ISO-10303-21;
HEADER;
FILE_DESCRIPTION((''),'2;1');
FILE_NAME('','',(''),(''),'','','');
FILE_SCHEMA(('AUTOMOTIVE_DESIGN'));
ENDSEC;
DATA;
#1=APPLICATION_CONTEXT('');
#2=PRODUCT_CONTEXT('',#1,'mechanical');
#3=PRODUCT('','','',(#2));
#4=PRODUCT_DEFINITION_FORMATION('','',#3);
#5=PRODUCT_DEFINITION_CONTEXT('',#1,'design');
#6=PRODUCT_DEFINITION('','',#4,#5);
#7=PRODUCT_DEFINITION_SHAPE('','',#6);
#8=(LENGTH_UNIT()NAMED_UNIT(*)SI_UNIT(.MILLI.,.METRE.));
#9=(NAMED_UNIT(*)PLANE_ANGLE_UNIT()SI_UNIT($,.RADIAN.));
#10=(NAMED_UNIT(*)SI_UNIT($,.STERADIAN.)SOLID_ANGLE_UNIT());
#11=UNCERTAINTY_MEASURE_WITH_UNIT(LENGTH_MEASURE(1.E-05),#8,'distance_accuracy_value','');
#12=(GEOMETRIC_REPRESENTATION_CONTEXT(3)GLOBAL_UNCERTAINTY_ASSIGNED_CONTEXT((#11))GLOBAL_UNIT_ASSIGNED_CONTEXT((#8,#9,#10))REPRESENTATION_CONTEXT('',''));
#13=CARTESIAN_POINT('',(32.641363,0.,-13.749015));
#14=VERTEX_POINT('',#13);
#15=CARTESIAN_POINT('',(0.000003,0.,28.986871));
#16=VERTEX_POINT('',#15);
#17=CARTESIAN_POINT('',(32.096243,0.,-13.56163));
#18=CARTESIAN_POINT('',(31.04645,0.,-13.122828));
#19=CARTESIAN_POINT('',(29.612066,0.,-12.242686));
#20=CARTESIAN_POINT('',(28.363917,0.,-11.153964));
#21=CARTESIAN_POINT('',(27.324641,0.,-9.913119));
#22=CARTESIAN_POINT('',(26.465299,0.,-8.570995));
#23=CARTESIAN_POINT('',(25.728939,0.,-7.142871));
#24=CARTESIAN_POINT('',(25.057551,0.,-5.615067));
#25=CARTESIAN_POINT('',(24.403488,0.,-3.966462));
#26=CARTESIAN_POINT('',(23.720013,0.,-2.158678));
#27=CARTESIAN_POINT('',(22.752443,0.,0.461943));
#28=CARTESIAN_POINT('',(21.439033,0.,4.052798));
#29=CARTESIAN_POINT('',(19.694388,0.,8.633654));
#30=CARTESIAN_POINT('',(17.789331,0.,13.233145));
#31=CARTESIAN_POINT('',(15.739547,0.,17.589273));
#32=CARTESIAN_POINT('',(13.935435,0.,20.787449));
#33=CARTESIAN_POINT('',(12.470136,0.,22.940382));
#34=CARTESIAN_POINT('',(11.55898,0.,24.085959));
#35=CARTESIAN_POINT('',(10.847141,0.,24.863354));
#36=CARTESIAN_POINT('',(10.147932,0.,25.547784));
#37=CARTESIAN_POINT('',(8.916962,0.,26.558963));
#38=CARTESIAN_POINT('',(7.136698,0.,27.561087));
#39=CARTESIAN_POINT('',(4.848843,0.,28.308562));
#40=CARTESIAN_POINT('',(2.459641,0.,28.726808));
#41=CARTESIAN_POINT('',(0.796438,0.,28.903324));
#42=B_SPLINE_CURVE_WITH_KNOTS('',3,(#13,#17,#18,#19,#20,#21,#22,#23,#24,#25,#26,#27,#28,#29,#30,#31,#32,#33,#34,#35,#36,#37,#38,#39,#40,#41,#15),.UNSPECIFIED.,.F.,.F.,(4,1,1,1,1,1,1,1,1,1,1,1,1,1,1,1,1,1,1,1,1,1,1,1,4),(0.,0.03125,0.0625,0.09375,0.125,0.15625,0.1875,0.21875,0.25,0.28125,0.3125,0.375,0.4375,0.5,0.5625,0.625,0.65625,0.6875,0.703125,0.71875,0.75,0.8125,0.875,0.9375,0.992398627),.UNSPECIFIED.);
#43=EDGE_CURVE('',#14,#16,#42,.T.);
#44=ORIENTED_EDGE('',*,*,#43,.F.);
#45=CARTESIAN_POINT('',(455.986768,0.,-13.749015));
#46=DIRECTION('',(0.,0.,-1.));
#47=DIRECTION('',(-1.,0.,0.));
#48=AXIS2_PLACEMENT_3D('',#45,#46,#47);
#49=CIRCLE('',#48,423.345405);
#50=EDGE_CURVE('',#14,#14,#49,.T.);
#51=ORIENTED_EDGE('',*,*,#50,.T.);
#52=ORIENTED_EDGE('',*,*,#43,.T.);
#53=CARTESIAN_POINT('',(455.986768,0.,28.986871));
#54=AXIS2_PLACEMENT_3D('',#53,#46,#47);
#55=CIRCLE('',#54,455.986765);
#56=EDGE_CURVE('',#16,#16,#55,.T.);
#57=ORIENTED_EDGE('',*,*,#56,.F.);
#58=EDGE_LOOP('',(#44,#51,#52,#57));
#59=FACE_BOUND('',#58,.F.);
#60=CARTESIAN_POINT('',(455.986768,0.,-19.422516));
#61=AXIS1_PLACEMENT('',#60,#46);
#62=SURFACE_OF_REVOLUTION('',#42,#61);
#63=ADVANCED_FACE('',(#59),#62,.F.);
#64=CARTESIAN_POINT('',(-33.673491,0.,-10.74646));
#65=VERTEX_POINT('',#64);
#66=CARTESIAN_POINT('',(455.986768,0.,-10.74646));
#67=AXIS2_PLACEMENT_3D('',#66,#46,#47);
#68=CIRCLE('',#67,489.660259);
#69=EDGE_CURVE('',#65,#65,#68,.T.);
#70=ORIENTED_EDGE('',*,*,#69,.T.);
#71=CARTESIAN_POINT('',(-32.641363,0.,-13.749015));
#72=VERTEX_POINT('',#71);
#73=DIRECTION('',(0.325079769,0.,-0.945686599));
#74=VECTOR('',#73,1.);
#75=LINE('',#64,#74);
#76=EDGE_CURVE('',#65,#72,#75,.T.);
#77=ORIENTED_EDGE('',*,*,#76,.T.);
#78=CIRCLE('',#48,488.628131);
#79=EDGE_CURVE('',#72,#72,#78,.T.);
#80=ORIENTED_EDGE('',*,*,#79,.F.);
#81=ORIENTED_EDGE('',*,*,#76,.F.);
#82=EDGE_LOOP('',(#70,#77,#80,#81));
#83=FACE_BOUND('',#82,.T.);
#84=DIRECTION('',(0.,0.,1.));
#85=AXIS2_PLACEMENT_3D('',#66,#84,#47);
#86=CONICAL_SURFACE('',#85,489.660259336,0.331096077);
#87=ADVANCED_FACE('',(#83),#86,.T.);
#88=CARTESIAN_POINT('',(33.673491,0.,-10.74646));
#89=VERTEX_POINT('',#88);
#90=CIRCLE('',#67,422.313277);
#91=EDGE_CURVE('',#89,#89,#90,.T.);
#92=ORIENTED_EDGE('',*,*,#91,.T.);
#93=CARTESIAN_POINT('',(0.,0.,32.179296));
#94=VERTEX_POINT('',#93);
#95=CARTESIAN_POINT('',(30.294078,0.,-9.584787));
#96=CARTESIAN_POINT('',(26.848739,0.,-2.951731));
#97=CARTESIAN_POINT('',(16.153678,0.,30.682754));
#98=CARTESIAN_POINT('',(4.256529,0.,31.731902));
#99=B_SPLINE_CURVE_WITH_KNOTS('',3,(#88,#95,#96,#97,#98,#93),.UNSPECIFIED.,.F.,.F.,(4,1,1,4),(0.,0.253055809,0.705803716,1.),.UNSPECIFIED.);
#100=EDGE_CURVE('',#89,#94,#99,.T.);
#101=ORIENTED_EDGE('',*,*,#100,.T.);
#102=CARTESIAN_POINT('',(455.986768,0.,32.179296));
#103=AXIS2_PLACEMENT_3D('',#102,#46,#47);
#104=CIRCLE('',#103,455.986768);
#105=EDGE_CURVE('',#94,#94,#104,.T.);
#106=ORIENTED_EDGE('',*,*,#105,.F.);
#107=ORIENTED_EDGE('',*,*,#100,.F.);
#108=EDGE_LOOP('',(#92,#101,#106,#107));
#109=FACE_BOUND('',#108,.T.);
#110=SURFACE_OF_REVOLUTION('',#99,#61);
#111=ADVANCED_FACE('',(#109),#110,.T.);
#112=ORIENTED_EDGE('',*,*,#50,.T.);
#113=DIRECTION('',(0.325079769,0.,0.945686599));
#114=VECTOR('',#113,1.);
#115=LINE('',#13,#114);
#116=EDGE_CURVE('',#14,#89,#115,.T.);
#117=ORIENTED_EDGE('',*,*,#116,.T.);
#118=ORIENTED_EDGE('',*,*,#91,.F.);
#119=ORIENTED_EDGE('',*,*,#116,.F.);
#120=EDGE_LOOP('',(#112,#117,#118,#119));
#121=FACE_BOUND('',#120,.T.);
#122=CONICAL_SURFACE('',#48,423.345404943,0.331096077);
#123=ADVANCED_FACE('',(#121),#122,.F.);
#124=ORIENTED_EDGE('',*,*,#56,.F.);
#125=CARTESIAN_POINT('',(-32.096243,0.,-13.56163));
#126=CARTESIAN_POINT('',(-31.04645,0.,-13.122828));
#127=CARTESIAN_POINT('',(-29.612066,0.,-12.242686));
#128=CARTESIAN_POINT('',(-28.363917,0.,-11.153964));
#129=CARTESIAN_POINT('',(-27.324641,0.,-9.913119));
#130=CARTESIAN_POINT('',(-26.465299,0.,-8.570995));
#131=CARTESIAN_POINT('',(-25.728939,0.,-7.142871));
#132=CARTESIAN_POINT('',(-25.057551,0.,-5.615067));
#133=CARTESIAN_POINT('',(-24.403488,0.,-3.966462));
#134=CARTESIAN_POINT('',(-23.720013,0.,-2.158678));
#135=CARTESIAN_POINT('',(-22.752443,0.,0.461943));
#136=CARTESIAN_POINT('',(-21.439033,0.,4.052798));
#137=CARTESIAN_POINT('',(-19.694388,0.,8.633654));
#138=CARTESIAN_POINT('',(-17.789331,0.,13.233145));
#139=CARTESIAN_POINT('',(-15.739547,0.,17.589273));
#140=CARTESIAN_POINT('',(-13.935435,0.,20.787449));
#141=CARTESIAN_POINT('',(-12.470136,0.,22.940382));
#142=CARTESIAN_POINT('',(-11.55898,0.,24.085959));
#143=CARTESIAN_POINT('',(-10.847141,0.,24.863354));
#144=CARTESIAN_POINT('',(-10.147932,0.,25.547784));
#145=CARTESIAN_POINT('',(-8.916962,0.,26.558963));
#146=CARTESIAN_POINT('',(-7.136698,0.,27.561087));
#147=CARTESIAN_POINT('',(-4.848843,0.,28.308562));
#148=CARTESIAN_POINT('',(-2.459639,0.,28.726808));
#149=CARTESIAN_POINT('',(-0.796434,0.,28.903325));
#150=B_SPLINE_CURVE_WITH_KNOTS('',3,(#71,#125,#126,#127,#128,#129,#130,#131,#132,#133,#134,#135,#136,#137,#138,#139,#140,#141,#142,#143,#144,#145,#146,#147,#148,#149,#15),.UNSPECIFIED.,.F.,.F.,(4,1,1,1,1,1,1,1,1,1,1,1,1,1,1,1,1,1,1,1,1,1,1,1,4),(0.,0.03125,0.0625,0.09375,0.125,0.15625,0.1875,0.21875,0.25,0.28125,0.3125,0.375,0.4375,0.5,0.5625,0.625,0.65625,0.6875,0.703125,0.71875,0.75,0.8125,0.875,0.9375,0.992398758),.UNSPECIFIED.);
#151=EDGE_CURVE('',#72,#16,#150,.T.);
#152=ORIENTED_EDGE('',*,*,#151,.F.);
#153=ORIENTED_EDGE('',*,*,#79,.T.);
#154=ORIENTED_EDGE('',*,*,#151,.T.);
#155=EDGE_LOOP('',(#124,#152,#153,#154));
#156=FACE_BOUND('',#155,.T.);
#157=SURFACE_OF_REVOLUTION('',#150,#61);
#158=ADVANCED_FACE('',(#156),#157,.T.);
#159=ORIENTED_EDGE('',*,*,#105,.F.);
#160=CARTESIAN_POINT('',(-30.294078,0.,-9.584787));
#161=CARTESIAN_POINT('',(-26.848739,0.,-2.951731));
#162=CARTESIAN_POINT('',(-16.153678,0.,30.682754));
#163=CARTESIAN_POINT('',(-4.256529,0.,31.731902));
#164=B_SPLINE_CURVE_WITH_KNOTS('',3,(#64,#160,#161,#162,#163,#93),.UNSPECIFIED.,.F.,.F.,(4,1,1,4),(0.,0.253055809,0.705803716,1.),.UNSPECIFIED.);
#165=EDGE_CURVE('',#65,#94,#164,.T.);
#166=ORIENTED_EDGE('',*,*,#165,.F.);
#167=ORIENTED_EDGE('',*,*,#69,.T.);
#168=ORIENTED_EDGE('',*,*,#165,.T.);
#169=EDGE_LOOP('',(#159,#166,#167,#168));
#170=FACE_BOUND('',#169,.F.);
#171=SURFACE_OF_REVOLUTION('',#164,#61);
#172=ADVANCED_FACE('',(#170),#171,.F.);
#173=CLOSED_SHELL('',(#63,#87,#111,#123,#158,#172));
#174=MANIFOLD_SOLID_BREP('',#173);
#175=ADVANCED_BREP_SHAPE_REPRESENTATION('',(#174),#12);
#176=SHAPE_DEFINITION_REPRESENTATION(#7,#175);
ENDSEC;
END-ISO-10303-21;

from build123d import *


# Not quite as in the source:
# - ends of sketch curves that miss each other by under 0.0002 mm in the source are joined
# - the dataset's text gives a spline's control points without its knots; the knots are read off the source's solid


with BuildPart() as f1:
    # F0 (on Front) → F1 (revolve)
    with BuildSketch(Plane.XZ):
        with BuildLine():
            add(Edge.make_bspline(
                [(-33.673491329, -10.746460408), (-30.2940776109, -9.5847869424), (-26.8487391771, -2.9517312884), (-16.1536775955, 30.6827537692), (-4.2565289879, 31.7319020918), (0, 32.1792960167)],
                knots=[0, 0, 0, 0, 0.253055809, 0.7058037164, 1, 1, 1, 1], degree=3))
            Line((-33.673491329, -10.746460408), (-32.6413630639, -13.7490153608))
            add(Edge.make_bspline(
                [(-32.6413630639, -13.7490153608), (-32.0962425463, -13.5616301828), (-31.046450311, -13.1228279851), (-29.6120656568, -12.2426857461), (-28.3639173439, -11.153963509), (-27.3246414028, -9.9131187607), (-26.4652990678, -8.5709945435), (-25.7289394786, -7.1428705696), (-25.0575509723, -5.6150665902), (-24.4034878727, -3.966461818), (-23.7200129331, -2.1586784961), (-22.7524429263, 0.4619432555), (-21.4390332444, 4.0527980839), (-19.6943876882, 8.6336541973), (-17.7893309715, 13.2331450383), (-15.7395466608, 17.5892727892), (-13.9354351571, 20.7874488056), (-12.4701363906, 22.9403819955), (-11.5589800124, 24.0859591421), (-10.8471405797, 24.8633535739), (-10.1479317433, 25.5477836542), (-8.9169623811, 26.5589629411), (-7.1366978466, 27.5610865699), (-4.8488431037, 28.3085620887), (-2.4596388179, 28.7268083984), (-0.7964342694, 28.9033245775), (2.8901e-06, 28.9868706605)],
                knots=[0, 0, 0, 0, 0.03125, 0.0625, 0.09375, 0.125, 0.15625, 0.1875, 0.21875, 0.25, 0.28125, 0.3125, 0.375, 0.4375, 0.5, 0.5625, 0.625, 0.65625, 0.6875, 0.703125, 0.71875, 0.75, 0.8125, 0.875, 0.9375, 0.9923987583, 0.9923987583, 0.9923987583, 0.9923987583], degree=3))
            add(Edge.make_bspline(
                [(32.6413630639, -13.7490153608), (32.0962425463, -13.5616301828), (31.046450311, -13.1228279851), (29.6120656568, -12.2426857461), (28.3639173439, -11.153963509), (27.3246414028, -9.9131187607), (26.4652990678, -8.5709945435), (25.7289394786, -7.1428705696), (25.0575509723, -5.6150665902), (24.4034878727, -3.966461818), (23.7200129331, -2.1586784961), (22.7524429263, 0.4619432555), (21.4390332444, 4.0527980839), (19.6943876882, 8.6336541973), (17.7893309715, 13.2331450383), (15.7395466608, 17.5892727892), (13.9354351571, 20.7874488056), (12.4701363906, 22.9403819955), (11.5589800124, 24.0859591421), (10.8471405797, 24.8633535739), (10.1479317433, 25.5477836542), (8.9169623811, 26.5589629411), (7.1366978466, 27.5610865699), (4.8488431037, 28.3085620887), (2.4596405625, 28.726808093), (0.7964379915, 28.9033241825), (2.8901e-06, 28.9868706605)],
                knots=[0, 0, 0, 0, 0.03125, 0.0625, 0.09375, 0.125, 0.15625, 0.1875, 0.21875, 0.25, 0.28125, 0.3125, 0.375, 0.4375, 0.5, 0.5625, 0.625, 0.65625, 0.6875, 0.703125, 0.71875, 0.75, 0.8125, 0.875, 0.9375, 0.9923986269, 0.9923986269, 0.9923986269, 0.9923986269], degree=3))
            Line((32.6413630639, -13.7490153608), (33.673491329, -10.746460408))
            add(Edge.make_bspline(
                [(33.673491329, -10.746460408), (30.2940776109, -9.5847869424), (26.8487391771, -2.9517312884), (16.1536775955, 30.6827537692), (4.2565289879, 31.7319020918), (0, 32.1792960167)],
                knots=[0, 0, 0, 0, 0.253055809, 0.7058037164, 1, 1, 1, 1], degree=3))
        make_face()
    revolve(axis=Axis((455.9867680073, 0, -19.4225162268), (0, 0, -1)))


solid = f1.part
